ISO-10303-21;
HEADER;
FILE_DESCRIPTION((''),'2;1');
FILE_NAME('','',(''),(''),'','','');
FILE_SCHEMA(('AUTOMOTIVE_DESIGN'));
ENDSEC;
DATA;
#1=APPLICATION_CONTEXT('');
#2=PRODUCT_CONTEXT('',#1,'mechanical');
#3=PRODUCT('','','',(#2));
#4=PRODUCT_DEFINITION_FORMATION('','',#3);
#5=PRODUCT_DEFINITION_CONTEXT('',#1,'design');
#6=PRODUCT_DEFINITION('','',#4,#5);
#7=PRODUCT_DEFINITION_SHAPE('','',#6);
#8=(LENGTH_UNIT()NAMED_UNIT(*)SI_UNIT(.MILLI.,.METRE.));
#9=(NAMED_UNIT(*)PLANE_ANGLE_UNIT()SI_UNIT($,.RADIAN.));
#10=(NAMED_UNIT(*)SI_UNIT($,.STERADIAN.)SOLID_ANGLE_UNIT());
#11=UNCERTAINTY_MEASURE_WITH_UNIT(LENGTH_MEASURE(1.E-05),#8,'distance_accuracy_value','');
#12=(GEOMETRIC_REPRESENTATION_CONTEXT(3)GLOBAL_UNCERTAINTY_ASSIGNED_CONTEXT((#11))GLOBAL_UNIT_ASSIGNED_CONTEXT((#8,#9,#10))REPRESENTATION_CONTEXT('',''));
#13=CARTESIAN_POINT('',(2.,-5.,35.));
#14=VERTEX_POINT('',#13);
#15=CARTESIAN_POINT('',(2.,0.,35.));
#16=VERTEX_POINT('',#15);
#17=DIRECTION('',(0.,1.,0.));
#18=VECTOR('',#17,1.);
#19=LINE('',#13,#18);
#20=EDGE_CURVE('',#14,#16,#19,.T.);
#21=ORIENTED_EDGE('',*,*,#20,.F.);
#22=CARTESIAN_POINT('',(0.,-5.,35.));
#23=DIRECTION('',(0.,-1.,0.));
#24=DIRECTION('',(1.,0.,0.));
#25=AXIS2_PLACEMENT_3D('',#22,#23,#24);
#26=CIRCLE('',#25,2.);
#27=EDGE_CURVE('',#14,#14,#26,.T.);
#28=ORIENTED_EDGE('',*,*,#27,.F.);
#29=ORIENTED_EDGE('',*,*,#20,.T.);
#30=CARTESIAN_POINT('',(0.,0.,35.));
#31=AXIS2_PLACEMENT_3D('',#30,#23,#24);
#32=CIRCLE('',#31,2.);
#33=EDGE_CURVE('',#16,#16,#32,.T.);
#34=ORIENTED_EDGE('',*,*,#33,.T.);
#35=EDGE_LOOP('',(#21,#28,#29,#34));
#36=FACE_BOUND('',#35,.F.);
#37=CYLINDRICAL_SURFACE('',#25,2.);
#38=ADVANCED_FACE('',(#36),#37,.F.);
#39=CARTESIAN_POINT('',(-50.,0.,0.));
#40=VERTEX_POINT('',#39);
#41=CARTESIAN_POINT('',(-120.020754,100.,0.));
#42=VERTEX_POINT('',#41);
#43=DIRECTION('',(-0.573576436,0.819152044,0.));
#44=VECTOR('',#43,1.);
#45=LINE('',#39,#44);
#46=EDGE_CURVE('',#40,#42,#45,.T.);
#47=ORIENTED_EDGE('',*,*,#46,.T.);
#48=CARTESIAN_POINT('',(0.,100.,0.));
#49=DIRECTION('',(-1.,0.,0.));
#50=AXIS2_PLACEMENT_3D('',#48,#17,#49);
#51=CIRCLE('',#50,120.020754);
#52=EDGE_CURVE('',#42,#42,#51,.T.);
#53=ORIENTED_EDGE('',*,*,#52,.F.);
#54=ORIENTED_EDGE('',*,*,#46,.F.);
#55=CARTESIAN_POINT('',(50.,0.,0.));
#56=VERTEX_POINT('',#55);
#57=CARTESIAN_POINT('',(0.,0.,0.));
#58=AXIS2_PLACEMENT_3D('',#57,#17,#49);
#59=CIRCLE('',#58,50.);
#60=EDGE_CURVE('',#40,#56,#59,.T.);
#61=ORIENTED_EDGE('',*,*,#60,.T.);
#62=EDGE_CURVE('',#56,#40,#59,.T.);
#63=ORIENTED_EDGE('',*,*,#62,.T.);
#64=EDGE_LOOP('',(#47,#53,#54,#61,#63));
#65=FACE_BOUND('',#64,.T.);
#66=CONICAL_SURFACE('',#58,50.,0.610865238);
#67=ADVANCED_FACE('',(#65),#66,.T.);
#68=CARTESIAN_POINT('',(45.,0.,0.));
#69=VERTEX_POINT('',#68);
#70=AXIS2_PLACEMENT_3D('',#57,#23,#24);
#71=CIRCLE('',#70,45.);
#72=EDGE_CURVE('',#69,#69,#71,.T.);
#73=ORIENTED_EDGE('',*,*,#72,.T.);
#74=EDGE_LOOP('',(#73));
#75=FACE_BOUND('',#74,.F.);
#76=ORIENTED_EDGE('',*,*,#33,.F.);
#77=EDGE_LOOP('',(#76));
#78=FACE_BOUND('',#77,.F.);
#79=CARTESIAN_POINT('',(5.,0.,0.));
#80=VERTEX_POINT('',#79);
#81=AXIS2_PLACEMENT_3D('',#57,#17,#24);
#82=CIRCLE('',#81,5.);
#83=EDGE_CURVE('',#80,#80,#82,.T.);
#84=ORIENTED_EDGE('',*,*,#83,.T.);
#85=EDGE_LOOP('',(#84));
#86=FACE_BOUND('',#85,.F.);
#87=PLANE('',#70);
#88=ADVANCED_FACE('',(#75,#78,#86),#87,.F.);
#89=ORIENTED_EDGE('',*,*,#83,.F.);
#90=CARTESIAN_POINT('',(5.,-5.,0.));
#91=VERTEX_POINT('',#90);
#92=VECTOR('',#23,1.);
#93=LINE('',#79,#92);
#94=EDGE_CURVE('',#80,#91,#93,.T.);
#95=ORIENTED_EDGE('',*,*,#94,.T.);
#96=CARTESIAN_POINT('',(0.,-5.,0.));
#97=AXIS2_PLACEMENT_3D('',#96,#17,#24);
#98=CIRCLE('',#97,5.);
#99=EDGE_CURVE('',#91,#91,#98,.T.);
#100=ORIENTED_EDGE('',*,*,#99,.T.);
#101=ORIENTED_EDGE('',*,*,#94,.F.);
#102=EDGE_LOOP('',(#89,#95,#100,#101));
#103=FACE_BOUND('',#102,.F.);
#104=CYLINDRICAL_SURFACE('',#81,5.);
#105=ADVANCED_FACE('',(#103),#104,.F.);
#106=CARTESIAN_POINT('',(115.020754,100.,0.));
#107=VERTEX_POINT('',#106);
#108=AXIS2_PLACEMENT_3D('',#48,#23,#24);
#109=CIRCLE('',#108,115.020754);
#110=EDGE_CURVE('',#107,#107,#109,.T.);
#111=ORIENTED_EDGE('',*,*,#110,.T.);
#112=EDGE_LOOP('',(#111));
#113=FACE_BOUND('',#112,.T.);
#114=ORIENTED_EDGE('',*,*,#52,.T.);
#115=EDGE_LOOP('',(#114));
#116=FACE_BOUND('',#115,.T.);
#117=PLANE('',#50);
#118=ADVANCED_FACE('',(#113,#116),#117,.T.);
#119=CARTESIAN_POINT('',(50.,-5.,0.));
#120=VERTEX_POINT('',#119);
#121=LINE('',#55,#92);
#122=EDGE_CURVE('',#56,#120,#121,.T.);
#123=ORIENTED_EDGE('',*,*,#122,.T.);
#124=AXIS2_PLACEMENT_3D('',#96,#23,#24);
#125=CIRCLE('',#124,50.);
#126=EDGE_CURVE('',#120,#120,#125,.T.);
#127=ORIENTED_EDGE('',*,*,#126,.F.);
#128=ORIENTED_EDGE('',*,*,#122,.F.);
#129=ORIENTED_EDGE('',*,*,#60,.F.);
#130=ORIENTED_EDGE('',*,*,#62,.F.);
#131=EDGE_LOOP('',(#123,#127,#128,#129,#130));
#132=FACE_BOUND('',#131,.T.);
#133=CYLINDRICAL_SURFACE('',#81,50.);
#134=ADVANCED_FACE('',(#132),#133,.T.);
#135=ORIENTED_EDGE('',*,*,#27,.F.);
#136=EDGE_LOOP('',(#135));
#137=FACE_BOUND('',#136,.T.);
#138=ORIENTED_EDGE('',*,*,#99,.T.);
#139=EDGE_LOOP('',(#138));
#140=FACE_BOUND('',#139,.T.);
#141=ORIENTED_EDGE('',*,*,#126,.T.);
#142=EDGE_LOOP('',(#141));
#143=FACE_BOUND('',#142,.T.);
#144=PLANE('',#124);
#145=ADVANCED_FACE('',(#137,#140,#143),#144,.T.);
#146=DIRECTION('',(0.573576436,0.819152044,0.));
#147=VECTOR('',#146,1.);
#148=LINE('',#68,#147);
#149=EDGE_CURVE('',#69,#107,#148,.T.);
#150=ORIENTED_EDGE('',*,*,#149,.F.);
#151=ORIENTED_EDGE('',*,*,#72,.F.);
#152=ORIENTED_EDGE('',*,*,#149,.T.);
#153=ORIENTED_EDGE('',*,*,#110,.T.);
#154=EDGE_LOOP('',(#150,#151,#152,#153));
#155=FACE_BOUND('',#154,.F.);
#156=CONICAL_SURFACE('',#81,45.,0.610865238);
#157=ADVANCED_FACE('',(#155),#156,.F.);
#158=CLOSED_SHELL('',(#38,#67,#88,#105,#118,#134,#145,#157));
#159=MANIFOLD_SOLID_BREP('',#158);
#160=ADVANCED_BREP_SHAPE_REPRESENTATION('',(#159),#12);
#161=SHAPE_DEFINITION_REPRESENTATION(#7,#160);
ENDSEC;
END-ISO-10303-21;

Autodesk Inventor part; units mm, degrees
ref_plane "YZ Plane" through (0, 0, 0) normal (1, 0, 0) x (0, 1, 0)
ref_plane "XZ Plane" through (0, 0, 0) normal (0, 1, 0) x (-1, 0, 0)
ref_plane "XY Plane" through (0, 0, 0) normal (0, 0, 1) x (1, 0, 0)
sketch "Szkic6" plane through (0, 0, 0) normal (0, 1, 0) x (-1, 0, 0)
  circle A0 centre (0, 0) radius 50
  dimension "d28" = 100
extrude "Wyciągnięcie proste5" add sketch "Szkic6" along normal blind 100 draft 35
sketch "Szkic7" plane through (0, 0, 0) normal (0, -1, 0) x (1, 0, 0)
  circle A0 centre (0, 0) radius 45
  dimension "d31" = 90
extrude "Wyciągnięcie proste6" cut sketch "Szkic7" against normal blind 100 draft 35
sketch "Szkic8" plane through (0, 0, 0) normal (0, -1, 0) x (1, 0, 0)
  circle A0 centre (0, 0) radius 50
extrude "Wyciągnięcie proste7" add sketch "Szkic8" along normal blind 5
sketch "Szkic9" plane through (0, -5, 0) normal (0, -1, 0) x (1, 0, 0)
  circle A0 centre (0, 35) radius 2
  point P0 (0, 0)
  dimension "d36" = 4
extrude "Wyciągnięcie proste8" cut sketch "Szkic9" against normal blind 5
sketch "Szkic10" plane through (0, 0, 0) normal (0, 1, 0) x (1, 0, 0)
  circle A0 centre (0, 0) radius 5
  dimension "d39" = 10
extrude "Wyciągnięcie proste9" cut sketch "Szkic10" against normal blind 5
properties part number "Lejek"
